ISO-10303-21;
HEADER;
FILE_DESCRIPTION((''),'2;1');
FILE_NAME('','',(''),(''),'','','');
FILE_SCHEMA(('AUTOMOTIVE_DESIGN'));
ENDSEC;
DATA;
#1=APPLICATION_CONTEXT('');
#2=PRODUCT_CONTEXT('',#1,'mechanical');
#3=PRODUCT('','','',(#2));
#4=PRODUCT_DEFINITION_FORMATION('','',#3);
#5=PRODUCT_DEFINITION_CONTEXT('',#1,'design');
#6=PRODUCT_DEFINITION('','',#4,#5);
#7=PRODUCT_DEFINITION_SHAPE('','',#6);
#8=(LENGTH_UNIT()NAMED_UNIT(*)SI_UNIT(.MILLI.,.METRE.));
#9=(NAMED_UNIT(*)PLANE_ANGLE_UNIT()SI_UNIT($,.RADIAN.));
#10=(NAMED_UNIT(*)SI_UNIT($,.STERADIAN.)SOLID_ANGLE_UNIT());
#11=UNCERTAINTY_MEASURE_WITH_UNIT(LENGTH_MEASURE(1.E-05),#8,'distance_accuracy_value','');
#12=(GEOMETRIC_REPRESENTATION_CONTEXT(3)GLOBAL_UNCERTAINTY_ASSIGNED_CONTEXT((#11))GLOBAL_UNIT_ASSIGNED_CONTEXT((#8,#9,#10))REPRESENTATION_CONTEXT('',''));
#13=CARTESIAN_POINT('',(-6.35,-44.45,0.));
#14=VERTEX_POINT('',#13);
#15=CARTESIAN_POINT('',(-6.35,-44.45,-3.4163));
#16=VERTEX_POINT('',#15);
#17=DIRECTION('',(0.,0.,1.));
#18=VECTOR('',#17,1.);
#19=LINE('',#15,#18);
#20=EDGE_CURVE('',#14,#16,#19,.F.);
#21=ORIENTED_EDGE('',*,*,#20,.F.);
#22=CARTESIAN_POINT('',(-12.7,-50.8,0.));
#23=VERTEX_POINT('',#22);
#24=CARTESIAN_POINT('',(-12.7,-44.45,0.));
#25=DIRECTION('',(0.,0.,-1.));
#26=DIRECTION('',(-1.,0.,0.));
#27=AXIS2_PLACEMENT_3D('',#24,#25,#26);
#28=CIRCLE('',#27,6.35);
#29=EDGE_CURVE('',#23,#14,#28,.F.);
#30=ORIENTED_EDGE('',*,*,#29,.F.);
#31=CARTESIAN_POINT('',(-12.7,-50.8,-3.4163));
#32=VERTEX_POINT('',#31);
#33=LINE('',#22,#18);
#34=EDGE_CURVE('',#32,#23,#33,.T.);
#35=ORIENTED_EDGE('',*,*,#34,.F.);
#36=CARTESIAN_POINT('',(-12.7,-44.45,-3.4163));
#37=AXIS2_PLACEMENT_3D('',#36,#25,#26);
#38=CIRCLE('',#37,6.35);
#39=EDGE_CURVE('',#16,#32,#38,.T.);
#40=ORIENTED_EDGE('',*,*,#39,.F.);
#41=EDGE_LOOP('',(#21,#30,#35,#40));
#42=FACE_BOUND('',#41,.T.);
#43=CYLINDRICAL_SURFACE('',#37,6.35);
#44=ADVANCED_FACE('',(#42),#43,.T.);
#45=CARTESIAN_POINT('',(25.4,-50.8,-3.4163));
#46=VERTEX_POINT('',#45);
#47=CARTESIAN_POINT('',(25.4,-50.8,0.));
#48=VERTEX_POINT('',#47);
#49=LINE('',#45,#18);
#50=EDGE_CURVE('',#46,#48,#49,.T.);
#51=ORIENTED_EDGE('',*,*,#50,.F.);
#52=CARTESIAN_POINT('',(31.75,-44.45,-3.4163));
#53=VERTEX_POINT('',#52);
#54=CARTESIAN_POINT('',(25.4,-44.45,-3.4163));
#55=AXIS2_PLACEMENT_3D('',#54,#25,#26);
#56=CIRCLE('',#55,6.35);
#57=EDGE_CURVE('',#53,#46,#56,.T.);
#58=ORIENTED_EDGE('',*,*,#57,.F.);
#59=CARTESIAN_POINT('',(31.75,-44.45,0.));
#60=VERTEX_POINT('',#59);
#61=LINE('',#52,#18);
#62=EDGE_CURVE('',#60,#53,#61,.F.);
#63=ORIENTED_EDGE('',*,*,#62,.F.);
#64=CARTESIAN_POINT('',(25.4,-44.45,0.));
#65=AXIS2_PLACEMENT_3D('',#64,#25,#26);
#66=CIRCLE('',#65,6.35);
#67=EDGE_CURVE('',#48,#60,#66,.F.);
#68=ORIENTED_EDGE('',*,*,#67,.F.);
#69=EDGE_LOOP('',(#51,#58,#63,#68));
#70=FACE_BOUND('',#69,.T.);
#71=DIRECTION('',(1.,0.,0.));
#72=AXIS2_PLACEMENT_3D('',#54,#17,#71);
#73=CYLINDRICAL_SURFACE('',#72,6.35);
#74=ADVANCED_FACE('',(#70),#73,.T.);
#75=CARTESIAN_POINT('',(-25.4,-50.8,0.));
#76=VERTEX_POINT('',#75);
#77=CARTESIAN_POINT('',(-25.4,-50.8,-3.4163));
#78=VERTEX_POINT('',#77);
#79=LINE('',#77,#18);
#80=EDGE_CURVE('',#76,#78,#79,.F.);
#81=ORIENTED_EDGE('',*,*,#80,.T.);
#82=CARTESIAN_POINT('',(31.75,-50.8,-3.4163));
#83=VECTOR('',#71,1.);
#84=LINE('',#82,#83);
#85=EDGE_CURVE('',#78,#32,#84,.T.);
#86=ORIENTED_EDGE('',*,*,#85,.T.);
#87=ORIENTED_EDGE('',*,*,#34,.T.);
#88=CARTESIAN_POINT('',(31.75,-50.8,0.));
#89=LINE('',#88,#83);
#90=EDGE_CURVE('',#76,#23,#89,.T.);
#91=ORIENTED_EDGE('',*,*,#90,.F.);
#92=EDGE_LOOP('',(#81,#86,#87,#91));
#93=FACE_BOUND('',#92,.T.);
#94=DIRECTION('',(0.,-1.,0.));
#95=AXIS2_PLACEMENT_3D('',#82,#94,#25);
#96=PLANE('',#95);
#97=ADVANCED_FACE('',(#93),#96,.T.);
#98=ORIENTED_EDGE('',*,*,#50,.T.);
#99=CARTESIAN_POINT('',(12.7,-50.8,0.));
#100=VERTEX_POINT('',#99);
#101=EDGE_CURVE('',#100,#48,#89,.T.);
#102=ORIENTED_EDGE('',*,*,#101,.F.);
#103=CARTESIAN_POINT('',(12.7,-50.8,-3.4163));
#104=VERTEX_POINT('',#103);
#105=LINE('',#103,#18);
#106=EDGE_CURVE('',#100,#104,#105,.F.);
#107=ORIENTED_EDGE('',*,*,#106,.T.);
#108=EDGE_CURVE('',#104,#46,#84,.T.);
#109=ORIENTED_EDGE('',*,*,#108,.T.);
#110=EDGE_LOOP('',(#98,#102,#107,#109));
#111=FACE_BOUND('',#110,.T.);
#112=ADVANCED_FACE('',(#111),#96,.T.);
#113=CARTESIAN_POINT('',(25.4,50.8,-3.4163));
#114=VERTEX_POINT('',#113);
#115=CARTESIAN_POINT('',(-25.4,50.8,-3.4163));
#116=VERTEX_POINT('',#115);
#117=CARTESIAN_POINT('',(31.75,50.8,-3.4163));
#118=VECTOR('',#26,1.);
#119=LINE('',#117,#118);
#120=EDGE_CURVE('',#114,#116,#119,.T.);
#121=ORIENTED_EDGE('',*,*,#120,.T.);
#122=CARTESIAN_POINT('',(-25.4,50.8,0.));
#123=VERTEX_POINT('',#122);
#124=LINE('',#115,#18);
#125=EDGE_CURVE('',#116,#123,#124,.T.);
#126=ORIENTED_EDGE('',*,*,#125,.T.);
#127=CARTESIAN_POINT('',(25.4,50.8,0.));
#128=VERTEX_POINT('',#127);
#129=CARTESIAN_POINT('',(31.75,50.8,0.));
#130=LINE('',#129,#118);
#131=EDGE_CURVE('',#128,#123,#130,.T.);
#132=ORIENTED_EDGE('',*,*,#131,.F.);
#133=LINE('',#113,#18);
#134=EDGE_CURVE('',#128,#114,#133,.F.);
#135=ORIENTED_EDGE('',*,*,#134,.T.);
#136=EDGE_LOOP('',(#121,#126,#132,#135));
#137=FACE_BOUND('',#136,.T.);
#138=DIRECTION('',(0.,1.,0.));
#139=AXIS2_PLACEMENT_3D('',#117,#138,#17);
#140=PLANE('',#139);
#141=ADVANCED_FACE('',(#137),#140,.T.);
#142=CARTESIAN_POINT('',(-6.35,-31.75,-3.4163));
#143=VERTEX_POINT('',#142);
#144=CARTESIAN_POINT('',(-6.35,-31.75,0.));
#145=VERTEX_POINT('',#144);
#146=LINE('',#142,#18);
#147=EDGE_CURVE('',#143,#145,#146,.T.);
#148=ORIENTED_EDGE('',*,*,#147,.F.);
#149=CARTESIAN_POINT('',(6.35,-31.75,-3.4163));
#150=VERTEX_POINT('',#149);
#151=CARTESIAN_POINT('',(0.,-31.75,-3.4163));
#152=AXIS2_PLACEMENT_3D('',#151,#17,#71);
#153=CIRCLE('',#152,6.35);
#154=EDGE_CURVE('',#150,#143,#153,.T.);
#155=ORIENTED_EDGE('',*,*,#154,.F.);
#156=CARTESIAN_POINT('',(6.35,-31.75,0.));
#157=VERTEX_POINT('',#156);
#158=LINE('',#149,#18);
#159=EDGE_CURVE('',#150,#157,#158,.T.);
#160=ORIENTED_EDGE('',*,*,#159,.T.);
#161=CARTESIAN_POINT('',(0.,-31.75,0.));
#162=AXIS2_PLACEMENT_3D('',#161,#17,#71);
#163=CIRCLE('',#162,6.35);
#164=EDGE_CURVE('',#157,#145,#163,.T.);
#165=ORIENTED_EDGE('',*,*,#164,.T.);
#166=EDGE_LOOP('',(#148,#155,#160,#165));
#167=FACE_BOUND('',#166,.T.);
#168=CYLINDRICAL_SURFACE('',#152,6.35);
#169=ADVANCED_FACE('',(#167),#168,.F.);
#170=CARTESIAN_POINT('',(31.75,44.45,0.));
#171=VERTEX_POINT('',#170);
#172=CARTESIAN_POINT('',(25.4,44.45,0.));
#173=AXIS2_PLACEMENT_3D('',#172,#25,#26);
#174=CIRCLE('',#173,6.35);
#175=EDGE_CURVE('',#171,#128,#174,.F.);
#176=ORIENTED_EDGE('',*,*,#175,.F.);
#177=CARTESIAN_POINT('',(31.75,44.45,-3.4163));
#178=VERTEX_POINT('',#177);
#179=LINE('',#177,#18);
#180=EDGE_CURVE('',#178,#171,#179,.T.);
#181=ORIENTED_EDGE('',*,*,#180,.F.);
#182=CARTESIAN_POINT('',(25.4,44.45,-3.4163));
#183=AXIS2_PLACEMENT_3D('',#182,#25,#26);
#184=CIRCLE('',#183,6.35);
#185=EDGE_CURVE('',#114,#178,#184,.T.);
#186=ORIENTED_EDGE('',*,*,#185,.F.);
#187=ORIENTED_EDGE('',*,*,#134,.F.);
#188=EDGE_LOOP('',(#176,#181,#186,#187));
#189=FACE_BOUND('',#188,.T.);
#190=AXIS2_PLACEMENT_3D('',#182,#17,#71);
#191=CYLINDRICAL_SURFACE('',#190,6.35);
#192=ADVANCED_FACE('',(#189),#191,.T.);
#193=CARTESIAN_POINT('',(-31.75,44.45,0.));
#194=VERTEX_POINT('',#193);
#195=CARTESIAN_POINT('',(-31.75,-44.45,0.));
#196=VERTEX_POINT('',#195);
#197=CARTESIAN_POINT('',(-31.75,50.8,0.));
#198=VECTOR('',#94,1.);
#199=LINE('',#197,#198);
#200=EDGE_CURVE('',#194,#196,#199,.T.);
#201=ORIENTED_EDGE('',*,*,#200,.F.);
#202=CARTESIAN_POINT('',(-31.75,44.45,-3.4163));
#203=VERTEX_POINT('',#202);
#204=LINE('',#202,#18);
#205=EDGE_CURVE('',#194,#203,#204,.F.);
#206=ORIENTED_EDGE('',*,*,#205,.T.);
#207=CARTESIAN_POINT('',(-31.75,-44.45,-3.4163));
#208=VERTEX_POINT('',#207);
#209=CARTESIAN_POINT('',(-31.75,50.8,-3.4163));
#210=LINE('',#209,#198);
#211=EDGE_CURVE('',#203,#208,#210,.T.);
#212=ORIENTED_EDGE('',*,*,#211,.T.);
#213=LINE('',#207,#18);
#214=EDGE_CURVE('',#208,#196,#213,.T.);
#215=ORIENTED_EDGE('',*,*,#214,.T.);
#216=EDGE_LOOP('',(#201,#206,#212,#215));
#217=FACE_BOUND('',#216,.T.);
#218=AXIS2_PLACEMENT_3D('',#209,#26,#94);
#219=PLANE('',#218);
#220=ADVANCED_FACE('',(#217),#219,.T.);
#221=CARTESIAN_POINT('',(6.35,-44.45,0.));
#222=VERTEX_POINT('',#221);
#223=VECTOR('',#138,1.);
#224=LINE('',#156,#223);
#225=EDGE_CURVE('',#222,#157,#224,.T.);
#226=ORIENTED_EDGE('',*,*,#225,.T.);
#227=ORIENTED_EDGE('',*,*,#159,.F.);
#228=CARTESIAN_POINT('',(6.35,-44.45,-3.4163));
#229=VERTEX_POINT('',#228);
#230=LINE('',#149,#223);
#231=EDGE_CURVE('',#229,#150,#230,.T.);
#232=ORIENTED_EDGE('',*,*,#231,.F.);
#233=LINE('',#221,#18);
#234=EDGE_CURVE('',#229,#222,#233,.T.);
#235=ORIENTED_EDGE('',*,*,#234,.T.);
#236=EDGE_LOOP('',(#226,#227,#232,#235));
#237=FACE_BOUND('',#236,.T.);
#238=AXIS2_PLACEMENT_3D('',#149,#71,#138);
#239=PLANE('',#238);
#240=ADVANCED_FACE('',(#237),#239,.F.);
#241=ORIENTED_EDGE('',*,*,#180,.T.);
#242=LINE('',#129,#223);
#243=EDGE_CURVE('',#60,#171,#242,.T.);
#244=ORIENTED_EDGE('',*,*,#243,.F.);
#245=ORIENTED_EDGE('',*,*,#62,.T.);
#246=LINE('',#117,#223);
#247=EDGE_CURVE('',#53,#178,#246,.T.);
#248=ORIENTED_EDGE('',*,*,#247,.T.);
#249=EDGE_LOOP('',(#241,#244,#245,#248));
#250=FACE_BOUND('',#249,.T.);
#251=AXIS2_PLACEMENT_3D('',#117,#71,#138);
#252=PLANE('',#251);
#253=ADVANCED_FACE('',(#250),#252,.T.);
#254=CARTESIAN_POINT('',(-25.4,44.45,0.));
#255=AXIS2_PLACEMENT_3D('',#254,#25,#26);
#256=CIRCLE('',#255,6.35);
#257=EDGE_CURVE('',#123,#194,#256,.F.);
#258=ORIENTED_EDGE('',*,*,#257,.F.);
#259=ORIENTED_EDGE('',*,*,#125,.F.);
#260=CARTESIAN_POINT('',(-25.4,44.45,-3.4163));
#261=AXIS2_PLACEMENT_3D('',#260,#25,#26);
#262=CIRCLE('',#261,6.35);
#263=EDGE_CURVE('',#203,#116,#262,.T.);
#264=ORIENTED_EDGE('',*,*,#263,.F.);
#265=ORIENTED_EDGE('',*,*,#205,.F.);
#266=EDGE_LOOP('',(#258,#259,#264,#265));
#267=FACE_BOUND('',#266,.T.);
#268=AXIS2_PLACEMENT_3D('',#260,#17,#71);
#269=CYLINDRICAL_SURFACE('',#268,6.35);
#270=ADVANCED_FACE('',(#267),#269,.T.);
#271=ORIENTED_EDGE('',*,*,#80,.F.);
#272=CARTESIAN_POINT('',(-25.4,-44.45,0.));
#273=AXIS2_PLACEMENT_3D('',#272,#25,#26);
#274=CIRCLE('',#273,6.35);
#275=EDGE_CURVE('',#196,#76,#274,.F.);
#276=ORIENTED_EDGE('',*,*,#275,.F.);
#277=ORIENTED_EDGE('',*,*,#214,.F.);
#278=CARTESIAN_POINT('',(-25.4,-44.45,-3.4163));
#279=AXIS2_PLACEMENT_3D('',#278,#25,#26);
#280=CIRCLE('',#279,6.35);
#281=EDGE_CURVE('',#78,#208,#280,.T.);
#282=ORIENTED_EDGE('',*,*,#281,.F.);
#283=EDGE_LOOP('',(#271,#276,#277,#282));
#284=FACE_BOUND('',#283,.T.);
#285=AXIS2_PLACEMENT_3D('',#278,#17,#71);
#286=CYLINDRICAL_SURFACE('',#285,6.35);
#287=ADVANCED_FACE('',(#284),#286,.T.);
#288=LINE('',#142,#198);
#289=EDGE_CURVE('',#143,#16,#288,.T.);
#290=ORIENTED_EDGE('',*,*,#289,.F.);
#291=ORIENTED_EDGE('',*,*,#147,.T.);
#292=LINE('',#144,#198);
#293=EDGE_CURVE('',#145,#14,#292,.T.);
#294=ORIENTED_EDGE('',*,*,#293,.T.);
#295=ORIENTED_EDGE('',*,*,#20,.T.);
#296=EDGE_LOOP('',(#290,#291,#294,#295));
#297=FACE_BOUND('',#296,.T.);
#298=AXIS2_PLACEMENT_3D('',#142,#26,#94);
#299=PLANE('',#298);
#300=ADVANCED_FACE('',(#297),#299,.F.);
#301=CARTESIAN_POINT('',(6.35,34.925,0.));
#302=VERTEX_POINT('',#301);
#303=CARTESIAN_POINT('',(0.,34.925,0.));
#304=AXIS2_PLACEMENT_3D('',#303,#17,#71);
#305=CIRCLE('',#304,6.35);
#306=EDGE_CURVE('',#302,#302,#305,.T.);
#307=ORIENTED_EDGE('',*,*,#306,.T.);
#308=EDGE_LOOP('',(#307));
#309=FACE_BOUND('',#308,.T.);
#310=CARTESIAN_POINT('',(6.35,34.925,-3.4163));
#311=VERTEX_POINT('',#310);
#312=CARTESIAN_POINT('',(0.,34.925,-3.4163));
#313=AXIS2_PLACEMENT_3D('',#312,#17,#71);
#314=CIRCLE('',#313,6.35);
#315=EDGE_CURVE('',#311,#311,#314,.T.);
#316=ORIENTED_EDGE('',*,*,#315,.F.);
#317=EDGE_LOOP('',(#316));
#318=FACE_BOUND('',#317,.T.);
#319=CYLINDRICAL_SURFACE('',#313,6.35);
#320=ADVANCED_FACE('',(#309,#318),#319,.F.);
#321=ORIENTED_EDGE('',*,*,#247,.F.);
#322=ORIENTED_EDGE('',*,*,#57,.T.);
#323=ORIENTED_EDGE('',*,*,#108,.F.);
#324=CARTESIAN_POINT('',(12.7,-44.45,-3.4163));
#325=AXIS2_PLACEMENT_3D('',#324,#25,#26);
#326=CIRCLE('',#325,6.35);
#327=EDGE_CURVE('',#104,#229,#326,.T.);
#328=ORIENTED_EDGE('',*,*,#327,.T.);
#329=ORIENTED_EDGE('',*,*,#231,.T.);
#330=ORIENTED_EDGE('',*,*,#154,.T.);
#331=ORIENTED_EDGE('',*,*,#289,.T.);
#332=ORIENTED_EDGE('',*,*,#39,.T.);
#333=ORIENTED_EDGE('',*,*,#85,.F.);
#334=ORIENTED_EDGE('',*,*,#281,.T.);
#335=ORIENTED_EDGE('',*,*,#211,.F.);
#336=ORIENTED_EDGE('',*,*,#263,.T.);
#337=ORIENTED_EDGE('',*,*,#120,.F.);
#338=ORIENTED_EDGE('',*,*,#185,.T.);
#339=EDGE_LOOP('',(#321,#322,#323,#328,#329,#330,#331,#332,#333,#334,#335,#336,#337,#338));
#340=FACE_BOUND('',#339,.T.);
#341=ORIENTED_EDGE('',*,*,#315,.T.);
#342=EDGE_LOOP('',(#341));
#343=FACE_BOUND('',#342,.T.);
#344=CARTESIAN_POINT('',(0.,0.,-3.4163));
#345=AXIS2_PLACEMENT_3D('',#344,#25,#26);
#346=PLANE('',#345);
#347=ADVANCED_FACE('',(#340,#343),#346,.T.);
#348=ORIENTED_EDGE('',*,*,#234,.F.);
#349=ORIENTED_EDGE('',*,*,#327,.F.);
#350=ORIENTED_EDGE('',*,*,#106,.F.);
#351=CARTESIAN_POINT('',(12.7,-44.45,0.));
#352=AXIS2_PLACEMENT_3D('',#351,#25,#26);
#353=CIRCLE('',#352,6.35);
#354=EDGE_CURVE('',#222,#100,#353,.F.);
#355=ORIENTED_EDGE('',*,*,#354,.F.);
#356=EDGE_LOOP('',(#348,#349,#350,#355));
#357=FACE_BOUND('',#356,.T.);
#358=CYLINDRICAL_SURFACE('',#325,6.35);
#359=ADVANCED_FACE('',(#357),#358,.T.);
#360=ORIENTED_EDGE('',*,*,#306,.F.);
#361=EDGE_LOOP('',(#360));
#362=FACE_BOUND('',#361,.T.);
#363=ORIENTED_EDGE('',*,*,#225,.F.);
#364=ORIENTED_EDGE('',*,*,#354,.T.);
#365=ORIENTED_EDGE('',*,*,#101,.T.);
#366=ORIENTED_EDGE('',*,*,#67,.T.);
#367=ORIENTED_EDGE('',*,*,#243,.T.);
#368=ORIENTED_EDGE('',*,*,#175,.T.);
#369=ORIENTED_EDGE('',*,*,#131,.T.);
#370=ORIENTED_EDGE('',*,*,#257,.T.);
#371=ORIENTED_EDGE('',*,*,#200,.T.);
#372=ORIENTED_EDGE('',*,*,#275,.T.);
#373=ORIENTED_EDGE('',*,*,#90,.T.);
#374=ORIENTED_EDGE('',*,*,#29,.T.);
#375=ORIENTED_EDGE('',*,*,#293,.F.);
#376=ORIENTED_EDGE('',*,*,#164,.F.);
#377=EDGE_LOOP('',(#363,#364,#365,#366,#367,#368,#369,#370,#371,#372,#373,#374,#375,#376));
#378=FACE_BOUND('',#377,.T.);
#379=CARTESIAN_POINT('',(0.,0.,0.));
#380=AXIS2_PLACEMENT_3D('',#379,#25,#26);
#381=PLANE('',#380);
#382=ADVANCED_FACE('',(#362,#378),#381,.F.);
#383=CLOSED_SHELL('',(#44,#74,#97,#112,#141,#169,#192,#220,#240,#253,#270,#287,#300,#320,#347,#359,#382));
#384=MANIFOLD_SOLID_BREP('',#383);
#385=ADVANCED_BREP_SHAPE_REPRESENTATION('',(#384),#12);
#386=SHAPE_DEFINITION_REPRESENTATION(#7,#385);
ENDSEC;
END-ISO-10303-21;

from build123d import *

# Parameters (mm, degrees)
CROQUIS1_W            = 63.5
CROQUIS1_H            = 101.6
BRIDA_BASE1_DEPTH     = 3.4163
CROQUIS2_R            = 6.35
CORTAR_EXTRUIR1_DEPTH = 61.0031133
ROMPER_START          = -3.4163
ROMPER_ESQUINA1_DEPTH = 3.4163


# Read off the part's stored shape, not the designer's step: Romper esquina1
# Sheet-metal steps are written as plain solids
with BuildPart() as part:
    # Croquis1 → Brida base1 (new body)
    with BuildSketch(Plane.XY):
        Rectangle(CROQUIS1_W, CROQUIS1_H)
    extrude(amount=-BRIDA_BASE1_DEPTH)

    # Croquis2 → Cortar-Extruir1 (cut, through all)
    with BuildSketch(Plane.XY):
        with Locations((0, 34.925)):
            Circle(CROQUIS2_R)
        with BuildLine():
            Line((6.35, -31.75), (6.35, -50.8))
            ThreePointArc((6.35, -50.8), (0, -57.15), (-6.35, -50.8))
            Line((-6.35, -50.8), (-6.35, -31.75))
            ThreePointArc((-6.35, -31.75), (0, -25.4), (6.35, -31.75))
        make_face()
    extrude(amount=-CORTAR_EXTRUIR1_DEPTH, mode=Mode.SUBTRACT)

    # Romper esquina1 outline → Romper esquina1 (cut)
    with BuildSketch(Plane.XY.offset(ROMPER_START)):
        with BuildLine():
            Line((6.35, -50.8), (12.7, -50.8))
            ThreePointArc((12.7, -50.8), (8.209871939, -48.940128061), (6.35, -44.45))
            Line((6.35, -44.45), (6.35, -50.8))
        make_face()
        with BuildLine():
            ThreePointArc((-6.35, -44.45), (-8.209871939, -48.940128061), (-12.7, -50.8))
            Line((-12.7, -50.8), (-6.35, -50.8))
            Line((-6.35, -50.8), (-6.35, -44.45))
        make_face()
        with BuildLine():
            ThreePointArc((-25.4, -50.8), (-29.890128061, -48.940128061), (-31.75, -44.45))
            Line((-31.75, -44.45), (-31.75, -50.8))
            Line((-31.75, -50.8), (-25.4, -50.8))
        make_face()
        with BuildLine():
            ThreePointArc((-31.75, 44.45), (-29.890128061, 48.940128061), (-25.4, 50.8))
            Line((-25.4, 50.8), (-31.75, 50.8))
            Line((-31.75, 50.8), (-31.75, 44.45))
        make_face()
        with BuildLine():
            ThreePointArc((25.4, 50.8), (29.890128061, 48.940128061), (31.75, 44.45))
            Line((31.75, 44.45), (31.75, 50.8))
            Line((31.75, 50.8), (25.4, 50.8))
        make_face()
        with BuildLine():
            ThreePointArc((31.75, -44.45), (29.890128061, -48.940128061), (25.4, -50.8))
            Line((25.4, -50.8), (31.75, -50.8))
            Line((31.75, -50.8), (31.75, -44.45))
        make_face()
    extrude(amount=ROMPER_ESQUINA1_DEPTH, mode=Mode.SUBTRACT)


solid = part.part
